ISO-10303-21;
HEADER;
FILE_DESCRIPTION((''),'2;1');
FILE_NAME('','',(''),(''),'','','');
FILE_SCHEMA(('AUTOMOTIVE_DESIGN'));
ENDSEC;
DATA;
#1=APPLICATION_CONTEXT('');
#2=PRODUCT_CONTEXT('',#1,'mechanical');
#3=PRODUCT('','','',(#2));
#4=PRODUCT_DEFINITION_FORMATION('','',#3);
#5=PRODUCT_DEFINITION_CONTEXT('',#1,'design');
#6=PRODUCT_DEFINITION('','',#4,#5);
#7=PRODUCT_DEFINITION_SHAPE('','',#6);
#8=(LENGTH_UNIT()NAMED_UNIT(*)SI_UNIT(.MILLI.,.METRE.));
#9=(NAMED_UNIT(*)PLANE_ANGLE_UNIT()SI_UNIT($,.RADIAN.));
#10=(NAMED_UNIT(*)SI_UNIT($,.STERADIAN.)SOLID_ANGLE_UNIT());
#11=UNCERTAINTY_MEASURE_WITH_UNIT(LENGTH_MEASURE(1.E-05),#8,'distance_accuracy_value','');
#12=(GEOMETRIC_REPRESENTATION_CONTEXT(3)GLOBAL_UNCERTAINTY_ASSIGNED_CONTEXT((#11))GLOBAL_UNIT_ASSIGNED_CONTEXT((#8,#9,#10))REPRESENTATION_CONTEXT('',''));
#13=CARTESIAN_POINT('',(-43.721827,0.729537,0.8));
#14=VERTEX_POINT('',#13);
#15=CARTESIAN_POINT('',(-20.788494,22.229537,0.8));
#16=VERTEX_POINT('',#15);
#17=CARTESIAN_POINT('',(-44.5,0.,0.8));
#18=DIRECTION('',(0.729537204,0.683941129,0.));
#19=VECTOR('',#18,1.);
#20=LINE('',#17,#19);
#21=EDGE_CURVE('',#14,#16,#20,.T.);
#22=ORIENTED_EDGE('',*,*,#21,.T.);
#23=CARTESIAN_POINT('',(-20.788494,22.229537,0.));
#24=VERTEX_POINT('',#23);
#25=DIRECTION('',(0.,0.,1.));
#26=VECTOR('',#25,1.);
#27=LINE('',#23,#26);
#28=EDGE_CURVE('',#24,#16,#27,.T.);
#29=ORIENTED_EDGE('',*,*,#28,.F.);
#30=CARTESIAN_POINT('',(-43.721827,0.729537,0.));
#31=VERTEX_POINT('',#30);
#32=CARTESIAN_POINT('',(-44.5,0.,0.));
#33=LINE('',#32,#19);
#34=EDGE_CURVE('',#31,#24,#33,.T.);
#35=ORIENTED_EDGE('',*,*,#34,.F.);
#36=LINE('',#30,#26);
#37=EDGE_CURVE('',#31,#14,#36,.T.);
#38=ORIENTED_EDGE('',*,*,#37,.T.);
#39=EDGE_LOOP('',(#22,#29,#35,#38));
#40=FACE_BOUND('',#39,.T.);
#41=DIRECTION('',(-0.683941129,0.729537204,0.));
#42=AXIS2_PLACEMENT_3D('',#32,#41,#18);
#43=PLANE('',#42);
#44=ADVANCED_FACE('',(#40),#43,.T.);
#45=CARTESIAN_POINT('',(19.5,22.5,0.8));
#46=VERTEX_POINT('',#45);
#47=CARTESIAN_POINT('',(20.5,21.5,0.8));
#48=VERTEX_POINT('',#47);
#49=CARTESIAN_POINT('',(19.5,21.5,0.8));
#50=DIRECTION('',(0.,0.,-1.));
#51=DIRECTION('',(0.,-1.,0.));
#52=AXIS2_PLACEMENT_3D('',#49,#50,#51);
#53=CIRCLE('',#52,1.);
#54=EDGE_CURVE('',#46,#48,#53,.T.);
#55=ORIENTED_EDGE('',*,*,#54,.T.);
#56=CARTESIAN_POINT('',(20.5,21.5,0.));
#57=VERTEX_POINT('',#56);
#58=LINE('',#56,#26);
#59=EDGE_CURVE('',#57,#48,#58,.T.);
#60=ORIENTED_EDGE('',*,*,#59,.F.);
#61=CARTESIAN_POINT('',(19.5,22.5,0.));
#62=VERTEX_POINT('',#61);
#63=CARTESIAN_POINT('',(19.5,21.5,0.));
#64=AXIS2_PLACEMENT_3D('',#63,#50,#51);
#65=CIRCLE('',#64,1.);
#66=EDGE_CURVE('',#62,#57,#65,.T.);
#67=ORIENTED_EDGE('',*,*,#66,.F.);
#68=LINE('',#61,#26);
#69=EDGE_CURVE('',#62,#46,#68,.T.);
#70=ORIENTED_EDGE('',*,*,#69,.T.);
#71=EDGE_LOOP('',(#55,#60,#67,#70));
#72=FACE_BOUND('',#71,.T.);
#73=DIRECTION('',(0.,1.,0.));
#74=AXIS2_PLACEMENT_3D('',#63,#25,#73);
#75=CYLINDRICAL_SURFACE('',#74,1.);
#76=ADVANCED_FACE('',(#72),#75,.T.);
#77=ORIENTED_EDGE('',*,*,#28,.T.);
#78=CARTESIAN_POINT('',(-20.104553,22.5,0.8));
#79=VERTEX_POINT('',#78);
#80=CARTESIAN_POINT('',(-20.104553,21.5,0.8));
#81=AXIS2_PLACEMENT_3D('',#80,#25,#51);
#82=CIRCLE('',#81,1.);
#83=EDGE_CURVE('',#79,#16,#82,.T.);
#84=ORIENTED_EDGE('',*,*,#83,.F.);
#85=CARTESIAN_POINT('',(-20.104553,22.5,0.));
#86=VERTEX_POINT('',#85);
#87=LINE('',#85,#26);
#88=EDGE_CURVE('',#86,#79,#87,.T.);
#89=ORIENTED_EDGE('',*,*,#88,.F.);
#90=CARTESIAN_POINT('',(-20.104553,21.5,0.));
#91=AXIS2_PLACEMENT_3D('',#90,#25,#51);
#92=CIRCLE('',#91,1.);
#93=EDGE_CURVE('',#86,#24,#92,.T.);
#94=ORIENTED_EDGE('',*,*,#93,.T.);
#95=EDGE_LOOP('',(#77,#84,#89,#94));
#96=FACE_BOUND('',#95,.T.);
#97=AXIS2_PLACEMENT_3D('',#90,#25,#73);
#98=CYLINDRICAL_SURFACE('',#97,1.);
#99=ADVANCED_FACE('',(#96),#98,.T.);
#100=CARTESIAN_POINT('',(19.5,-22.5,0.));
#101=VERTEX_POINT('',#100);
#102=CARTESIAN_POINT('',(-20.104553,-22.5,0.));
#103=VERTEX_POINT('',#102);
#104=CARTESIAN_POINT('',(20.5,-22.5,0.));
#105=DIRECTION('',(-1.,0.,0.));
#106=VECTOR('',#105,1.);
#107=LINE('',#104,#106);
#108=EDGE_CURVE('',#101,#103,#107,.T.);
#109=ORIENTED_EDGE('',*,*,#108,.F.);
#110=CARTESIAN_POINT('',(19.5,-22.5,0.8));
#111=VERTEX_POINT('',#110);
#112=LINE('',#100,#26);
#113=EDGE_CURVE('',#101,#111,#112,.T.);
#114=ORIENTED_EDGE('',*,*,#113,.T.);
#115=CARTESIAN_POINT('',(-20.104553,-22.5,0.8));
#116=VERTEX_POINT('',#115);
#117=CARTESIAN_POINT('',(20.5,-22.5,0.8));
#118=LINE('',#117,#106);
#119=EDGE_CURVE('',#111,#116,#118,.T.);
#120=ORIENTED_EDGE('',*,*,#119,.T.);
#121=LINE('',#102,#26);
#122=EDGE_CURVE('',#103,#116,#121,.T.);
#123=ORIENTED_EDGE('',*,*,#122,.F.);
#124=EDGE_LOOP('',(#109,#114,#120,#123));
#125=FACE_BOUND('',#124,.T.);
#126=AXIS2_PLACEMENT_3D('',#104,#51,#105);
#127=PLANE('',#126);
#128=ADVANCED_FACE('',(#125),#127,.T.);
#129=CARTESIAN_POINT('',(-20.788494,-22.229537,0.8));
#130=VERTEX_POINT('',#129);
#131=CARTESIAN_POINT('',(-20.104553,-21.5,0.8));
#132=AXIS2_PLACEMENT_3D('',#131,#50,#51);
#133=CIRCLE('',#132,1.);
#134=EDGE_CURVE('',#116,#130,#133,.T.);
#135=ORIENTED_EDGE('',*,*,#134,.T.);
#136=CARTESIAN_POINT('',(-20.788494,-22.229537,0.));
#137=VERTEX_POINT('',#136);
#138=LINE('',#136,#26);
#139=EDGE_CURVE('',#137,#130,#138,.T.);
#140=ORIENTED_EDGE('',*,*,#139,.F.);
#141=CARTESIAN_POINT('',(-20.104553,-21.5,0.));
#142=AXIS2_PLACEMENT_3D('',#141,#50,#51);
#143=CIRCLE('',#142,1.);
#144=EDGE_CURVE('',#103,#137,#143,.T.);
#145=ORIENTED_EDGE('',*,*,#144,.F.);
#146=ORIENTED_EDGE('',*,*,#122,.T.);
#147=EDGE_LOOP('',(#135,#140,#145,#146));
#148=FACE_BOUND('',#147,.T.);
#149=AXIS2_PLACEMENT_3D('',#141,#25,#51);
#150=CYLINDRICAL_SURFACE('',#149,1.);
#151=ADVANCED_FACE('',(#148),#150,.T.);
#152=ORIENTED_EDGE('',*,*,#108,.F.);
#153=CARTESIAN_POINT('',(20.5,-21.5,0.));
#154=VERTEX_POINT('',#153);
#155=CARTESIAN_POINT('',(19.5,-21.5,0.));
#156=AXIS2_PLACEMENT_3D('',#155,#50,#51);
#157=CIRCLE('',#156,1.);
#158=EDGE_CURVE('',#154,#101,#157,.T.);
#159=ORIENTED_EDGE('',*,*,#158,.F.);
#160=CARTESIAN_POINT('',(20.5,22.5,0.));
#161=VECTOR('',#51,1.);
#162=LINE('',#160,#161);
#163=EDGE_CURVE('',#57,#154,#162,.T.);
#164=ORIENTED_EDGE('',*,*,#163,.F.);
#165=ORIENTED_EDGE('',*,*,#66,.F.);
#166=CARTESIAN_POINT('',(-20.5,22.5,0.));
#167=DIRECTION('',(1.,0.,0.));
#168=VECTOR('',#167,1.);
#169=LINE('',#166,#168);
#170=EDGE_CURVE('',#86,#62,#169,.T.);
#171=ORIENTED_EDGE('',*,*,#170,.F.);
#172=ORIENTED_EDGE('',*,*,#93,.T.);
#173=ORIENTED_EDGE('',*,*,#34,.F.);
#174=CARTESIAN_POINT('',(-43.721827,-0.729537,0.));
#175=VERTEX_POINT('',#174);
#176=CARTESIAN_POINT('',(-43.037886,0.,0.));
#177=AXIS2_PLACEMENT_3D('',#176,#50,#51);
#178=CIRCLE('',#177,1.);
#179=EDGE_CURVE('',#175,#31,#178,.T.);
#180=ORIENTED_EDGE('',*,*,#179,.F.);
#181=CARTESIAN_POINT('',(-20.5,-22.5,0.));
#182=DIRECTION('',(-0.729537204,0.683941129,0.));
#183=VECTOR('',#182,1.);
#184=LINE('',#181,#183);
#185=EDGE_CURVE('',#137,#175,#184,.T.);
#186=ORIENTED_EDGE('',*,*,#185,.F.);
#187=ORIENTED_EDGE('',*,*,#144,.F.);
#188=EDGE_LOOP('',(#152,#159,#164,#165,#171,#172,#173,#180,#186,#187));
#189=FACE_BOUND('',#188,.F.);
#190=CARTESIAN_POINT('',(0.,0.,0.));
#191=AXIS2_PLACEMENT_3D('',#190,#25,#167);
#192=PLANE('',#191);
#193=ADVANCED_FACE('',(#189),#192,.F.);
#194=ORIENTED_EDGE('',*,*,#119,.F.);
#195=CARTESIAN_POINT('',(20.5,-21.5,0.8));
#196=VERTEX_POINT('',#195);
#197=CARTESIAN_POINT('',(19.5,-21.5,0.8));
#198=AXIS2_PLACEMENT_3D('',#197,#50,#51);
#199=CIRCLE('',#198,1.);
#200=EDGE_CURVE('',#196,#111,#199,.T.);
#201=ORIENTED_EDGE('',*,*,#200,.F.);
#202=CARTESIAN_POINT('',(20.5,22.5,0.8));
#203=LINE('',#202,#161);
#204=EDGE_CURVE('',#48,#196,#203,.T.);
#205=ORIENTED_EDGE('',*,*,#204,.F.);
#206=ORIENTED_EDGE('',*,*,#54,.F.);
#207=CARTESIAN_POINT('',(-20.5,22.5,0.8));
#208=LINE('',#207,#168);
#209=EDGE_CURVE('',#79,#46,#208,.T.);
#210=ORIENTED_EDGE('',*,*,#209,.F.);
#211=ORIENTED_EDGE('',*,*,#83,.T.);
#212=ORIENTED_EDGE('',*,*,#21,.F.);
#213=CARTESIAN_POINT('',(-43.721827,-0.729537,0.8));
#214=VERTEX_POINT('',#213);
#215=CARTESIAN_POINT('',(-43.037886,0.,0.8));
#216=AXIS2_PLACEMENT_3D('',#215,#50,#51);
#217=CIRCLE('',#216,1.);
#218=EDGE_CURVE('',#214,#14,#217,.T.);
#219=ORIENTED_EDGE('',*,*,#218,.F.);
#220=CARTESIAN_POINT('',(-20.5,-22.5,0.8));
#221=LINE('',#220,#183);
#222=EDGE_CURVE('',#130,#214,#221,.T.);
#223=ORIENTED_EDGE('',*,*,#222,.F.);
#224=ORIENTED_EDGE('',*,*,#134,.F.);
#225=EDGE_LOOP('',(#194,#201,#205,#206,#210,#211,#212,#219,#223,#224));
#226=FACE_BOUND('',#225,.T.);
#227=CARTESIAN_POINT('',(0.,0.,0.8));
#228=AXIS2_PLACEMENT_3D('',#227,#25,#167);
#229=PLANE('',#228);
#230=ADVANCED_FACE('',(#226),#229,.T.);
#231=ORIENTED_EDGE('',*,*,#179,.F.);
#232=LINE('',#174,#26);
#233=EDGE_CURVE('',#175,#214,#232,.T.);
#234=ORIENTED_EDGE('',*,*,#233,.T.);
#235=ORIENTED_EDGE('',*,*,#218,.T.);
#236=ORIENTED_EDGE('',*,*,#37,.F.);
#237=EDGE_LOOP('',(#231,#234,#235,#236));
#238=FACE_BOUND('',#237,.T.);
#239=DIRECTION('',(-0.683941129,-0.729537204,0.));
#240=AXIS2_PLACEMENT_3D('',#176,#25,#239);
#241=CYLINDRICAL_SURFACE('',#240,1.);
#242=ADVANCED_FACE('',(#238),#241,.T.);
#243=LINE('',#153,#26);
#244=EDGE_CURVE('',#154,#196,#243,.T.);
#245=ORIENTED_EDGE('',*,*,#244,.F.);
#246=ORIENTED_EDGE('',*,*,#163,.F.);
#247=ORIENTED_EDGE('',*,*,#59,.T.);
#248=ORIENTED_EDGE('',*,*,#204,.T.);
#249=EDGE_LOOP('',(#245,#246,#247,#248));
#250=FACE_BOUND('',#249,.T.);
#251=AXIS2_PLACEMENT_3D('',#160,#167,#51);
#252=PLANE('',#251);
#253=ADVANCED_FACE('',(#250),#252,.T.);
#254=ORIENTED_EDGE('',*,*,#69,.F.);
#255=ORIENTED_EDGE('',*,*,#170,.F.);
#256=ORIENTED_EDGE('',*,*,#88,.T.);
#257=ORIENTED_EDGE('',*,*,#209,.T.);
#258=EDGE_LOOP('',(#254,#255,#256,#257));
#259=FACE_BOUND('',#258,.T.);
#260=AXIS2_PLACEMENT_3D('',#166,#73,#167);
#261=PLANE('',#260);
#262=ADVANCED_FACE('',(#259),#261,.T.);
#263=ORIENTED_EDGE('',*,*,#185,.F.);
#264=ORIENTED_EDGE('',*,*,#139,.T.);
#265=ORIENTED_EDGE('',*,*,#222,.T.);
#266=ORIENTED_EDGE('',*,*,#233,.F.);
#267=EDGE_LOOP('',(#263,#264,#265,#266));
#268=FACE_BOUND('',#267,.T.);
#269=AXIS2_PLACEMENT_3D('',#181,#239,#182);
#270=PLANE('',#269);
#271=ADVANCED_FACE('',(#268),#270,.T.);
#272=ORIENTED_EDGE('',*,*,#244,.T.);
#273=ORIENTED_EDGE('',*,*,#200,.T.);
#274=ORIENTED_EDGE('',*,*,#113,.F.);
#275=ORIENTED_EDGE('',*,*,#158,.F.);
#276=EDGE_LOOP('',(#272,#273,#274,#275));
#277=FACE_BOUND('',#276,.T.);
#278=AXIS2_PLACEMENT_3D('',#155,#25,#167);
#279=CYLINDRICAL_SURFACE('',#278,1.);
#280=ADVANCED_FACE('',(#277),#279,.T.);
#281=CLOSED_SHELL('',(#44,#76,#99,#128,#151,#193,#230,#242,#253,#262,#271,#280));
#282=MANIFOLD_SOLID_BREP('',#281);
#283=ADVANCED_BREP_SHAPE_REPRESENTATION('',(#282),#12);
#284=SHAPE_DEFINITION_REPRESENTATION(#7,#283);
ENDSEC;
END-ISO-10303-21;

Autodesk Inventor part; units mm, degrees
ref_plane "YZ Plane" through (0, 0, 0) normal (1, 0, 0) x (0, 1, 0)
ref_plane "XZ Plane" through (0, 0, 0) normal (0, 1, 0) x (-1, 0, 0)
ref_plane "XY Plane" through (0, 0, 0) normal (0, 0, 1) x (1, 0, 0)
sketch "Sketch1" plane through (0, 0, 0) normal (0, 0, 1) x (1, 0, 0)
  line L0 (-20.5, 22.5) -> (20.5, 22.5)
  line L1 (20.5, 22.5) -> (20.5, -22.5)
  line L2 (20.5, -22.5) -> (-20.5, -22.5)
  line L3 (-20.5, -22.5) -> (-20.5, 22.5) construction
  line L4 (-20.5, 22.5) -> (20.5, -22.5) construction
  line L5 (-20.5, -22.5) -> (-44.5, 0)
  line L6 (-44.5, 0) -> (-20.5, 22.5)
  point P0 (0, 0)
  point P1 (0, 0)
  point P2 (20.5, 0)
  dimension "d0" = 41
  dimension "d1" = 45
  dimension "d4" = 65
extrude "Plate1" add sketch "Sketch1" along normal blind 0.8
fillet "Corner Round2" radius 1 5 edges at (-20.5, -22.5, 0.4) (-44.5, 0, 0.4) (-20.5, 22.5, 0.4) (20.5, -22.5, 0.4) (20.5, 22.5, 0.4)
equation "\"d2\" = Thickness"
equation "\"BendReliefWidth\" = Thickness"
equation "\"BendReliefDepth\" = 0.5 * Thickness"
equation "\"CornerReliefSize\" = 4 * Thickness"
equation "\"MinimumRemnant\" = 2 * Thickness"
equation "\"TransitionRadius\" = BendRadius"
equation "\"JacobiRadiusSize\" = BendRadius"
equation "\"GapSize\" = Thickness"
equation "\"Thickness\" = 0.8"
equation "\"BendRadius\" = 2.75"
properties part number "DSB-508 CAP house" material "Stainless Steel"
